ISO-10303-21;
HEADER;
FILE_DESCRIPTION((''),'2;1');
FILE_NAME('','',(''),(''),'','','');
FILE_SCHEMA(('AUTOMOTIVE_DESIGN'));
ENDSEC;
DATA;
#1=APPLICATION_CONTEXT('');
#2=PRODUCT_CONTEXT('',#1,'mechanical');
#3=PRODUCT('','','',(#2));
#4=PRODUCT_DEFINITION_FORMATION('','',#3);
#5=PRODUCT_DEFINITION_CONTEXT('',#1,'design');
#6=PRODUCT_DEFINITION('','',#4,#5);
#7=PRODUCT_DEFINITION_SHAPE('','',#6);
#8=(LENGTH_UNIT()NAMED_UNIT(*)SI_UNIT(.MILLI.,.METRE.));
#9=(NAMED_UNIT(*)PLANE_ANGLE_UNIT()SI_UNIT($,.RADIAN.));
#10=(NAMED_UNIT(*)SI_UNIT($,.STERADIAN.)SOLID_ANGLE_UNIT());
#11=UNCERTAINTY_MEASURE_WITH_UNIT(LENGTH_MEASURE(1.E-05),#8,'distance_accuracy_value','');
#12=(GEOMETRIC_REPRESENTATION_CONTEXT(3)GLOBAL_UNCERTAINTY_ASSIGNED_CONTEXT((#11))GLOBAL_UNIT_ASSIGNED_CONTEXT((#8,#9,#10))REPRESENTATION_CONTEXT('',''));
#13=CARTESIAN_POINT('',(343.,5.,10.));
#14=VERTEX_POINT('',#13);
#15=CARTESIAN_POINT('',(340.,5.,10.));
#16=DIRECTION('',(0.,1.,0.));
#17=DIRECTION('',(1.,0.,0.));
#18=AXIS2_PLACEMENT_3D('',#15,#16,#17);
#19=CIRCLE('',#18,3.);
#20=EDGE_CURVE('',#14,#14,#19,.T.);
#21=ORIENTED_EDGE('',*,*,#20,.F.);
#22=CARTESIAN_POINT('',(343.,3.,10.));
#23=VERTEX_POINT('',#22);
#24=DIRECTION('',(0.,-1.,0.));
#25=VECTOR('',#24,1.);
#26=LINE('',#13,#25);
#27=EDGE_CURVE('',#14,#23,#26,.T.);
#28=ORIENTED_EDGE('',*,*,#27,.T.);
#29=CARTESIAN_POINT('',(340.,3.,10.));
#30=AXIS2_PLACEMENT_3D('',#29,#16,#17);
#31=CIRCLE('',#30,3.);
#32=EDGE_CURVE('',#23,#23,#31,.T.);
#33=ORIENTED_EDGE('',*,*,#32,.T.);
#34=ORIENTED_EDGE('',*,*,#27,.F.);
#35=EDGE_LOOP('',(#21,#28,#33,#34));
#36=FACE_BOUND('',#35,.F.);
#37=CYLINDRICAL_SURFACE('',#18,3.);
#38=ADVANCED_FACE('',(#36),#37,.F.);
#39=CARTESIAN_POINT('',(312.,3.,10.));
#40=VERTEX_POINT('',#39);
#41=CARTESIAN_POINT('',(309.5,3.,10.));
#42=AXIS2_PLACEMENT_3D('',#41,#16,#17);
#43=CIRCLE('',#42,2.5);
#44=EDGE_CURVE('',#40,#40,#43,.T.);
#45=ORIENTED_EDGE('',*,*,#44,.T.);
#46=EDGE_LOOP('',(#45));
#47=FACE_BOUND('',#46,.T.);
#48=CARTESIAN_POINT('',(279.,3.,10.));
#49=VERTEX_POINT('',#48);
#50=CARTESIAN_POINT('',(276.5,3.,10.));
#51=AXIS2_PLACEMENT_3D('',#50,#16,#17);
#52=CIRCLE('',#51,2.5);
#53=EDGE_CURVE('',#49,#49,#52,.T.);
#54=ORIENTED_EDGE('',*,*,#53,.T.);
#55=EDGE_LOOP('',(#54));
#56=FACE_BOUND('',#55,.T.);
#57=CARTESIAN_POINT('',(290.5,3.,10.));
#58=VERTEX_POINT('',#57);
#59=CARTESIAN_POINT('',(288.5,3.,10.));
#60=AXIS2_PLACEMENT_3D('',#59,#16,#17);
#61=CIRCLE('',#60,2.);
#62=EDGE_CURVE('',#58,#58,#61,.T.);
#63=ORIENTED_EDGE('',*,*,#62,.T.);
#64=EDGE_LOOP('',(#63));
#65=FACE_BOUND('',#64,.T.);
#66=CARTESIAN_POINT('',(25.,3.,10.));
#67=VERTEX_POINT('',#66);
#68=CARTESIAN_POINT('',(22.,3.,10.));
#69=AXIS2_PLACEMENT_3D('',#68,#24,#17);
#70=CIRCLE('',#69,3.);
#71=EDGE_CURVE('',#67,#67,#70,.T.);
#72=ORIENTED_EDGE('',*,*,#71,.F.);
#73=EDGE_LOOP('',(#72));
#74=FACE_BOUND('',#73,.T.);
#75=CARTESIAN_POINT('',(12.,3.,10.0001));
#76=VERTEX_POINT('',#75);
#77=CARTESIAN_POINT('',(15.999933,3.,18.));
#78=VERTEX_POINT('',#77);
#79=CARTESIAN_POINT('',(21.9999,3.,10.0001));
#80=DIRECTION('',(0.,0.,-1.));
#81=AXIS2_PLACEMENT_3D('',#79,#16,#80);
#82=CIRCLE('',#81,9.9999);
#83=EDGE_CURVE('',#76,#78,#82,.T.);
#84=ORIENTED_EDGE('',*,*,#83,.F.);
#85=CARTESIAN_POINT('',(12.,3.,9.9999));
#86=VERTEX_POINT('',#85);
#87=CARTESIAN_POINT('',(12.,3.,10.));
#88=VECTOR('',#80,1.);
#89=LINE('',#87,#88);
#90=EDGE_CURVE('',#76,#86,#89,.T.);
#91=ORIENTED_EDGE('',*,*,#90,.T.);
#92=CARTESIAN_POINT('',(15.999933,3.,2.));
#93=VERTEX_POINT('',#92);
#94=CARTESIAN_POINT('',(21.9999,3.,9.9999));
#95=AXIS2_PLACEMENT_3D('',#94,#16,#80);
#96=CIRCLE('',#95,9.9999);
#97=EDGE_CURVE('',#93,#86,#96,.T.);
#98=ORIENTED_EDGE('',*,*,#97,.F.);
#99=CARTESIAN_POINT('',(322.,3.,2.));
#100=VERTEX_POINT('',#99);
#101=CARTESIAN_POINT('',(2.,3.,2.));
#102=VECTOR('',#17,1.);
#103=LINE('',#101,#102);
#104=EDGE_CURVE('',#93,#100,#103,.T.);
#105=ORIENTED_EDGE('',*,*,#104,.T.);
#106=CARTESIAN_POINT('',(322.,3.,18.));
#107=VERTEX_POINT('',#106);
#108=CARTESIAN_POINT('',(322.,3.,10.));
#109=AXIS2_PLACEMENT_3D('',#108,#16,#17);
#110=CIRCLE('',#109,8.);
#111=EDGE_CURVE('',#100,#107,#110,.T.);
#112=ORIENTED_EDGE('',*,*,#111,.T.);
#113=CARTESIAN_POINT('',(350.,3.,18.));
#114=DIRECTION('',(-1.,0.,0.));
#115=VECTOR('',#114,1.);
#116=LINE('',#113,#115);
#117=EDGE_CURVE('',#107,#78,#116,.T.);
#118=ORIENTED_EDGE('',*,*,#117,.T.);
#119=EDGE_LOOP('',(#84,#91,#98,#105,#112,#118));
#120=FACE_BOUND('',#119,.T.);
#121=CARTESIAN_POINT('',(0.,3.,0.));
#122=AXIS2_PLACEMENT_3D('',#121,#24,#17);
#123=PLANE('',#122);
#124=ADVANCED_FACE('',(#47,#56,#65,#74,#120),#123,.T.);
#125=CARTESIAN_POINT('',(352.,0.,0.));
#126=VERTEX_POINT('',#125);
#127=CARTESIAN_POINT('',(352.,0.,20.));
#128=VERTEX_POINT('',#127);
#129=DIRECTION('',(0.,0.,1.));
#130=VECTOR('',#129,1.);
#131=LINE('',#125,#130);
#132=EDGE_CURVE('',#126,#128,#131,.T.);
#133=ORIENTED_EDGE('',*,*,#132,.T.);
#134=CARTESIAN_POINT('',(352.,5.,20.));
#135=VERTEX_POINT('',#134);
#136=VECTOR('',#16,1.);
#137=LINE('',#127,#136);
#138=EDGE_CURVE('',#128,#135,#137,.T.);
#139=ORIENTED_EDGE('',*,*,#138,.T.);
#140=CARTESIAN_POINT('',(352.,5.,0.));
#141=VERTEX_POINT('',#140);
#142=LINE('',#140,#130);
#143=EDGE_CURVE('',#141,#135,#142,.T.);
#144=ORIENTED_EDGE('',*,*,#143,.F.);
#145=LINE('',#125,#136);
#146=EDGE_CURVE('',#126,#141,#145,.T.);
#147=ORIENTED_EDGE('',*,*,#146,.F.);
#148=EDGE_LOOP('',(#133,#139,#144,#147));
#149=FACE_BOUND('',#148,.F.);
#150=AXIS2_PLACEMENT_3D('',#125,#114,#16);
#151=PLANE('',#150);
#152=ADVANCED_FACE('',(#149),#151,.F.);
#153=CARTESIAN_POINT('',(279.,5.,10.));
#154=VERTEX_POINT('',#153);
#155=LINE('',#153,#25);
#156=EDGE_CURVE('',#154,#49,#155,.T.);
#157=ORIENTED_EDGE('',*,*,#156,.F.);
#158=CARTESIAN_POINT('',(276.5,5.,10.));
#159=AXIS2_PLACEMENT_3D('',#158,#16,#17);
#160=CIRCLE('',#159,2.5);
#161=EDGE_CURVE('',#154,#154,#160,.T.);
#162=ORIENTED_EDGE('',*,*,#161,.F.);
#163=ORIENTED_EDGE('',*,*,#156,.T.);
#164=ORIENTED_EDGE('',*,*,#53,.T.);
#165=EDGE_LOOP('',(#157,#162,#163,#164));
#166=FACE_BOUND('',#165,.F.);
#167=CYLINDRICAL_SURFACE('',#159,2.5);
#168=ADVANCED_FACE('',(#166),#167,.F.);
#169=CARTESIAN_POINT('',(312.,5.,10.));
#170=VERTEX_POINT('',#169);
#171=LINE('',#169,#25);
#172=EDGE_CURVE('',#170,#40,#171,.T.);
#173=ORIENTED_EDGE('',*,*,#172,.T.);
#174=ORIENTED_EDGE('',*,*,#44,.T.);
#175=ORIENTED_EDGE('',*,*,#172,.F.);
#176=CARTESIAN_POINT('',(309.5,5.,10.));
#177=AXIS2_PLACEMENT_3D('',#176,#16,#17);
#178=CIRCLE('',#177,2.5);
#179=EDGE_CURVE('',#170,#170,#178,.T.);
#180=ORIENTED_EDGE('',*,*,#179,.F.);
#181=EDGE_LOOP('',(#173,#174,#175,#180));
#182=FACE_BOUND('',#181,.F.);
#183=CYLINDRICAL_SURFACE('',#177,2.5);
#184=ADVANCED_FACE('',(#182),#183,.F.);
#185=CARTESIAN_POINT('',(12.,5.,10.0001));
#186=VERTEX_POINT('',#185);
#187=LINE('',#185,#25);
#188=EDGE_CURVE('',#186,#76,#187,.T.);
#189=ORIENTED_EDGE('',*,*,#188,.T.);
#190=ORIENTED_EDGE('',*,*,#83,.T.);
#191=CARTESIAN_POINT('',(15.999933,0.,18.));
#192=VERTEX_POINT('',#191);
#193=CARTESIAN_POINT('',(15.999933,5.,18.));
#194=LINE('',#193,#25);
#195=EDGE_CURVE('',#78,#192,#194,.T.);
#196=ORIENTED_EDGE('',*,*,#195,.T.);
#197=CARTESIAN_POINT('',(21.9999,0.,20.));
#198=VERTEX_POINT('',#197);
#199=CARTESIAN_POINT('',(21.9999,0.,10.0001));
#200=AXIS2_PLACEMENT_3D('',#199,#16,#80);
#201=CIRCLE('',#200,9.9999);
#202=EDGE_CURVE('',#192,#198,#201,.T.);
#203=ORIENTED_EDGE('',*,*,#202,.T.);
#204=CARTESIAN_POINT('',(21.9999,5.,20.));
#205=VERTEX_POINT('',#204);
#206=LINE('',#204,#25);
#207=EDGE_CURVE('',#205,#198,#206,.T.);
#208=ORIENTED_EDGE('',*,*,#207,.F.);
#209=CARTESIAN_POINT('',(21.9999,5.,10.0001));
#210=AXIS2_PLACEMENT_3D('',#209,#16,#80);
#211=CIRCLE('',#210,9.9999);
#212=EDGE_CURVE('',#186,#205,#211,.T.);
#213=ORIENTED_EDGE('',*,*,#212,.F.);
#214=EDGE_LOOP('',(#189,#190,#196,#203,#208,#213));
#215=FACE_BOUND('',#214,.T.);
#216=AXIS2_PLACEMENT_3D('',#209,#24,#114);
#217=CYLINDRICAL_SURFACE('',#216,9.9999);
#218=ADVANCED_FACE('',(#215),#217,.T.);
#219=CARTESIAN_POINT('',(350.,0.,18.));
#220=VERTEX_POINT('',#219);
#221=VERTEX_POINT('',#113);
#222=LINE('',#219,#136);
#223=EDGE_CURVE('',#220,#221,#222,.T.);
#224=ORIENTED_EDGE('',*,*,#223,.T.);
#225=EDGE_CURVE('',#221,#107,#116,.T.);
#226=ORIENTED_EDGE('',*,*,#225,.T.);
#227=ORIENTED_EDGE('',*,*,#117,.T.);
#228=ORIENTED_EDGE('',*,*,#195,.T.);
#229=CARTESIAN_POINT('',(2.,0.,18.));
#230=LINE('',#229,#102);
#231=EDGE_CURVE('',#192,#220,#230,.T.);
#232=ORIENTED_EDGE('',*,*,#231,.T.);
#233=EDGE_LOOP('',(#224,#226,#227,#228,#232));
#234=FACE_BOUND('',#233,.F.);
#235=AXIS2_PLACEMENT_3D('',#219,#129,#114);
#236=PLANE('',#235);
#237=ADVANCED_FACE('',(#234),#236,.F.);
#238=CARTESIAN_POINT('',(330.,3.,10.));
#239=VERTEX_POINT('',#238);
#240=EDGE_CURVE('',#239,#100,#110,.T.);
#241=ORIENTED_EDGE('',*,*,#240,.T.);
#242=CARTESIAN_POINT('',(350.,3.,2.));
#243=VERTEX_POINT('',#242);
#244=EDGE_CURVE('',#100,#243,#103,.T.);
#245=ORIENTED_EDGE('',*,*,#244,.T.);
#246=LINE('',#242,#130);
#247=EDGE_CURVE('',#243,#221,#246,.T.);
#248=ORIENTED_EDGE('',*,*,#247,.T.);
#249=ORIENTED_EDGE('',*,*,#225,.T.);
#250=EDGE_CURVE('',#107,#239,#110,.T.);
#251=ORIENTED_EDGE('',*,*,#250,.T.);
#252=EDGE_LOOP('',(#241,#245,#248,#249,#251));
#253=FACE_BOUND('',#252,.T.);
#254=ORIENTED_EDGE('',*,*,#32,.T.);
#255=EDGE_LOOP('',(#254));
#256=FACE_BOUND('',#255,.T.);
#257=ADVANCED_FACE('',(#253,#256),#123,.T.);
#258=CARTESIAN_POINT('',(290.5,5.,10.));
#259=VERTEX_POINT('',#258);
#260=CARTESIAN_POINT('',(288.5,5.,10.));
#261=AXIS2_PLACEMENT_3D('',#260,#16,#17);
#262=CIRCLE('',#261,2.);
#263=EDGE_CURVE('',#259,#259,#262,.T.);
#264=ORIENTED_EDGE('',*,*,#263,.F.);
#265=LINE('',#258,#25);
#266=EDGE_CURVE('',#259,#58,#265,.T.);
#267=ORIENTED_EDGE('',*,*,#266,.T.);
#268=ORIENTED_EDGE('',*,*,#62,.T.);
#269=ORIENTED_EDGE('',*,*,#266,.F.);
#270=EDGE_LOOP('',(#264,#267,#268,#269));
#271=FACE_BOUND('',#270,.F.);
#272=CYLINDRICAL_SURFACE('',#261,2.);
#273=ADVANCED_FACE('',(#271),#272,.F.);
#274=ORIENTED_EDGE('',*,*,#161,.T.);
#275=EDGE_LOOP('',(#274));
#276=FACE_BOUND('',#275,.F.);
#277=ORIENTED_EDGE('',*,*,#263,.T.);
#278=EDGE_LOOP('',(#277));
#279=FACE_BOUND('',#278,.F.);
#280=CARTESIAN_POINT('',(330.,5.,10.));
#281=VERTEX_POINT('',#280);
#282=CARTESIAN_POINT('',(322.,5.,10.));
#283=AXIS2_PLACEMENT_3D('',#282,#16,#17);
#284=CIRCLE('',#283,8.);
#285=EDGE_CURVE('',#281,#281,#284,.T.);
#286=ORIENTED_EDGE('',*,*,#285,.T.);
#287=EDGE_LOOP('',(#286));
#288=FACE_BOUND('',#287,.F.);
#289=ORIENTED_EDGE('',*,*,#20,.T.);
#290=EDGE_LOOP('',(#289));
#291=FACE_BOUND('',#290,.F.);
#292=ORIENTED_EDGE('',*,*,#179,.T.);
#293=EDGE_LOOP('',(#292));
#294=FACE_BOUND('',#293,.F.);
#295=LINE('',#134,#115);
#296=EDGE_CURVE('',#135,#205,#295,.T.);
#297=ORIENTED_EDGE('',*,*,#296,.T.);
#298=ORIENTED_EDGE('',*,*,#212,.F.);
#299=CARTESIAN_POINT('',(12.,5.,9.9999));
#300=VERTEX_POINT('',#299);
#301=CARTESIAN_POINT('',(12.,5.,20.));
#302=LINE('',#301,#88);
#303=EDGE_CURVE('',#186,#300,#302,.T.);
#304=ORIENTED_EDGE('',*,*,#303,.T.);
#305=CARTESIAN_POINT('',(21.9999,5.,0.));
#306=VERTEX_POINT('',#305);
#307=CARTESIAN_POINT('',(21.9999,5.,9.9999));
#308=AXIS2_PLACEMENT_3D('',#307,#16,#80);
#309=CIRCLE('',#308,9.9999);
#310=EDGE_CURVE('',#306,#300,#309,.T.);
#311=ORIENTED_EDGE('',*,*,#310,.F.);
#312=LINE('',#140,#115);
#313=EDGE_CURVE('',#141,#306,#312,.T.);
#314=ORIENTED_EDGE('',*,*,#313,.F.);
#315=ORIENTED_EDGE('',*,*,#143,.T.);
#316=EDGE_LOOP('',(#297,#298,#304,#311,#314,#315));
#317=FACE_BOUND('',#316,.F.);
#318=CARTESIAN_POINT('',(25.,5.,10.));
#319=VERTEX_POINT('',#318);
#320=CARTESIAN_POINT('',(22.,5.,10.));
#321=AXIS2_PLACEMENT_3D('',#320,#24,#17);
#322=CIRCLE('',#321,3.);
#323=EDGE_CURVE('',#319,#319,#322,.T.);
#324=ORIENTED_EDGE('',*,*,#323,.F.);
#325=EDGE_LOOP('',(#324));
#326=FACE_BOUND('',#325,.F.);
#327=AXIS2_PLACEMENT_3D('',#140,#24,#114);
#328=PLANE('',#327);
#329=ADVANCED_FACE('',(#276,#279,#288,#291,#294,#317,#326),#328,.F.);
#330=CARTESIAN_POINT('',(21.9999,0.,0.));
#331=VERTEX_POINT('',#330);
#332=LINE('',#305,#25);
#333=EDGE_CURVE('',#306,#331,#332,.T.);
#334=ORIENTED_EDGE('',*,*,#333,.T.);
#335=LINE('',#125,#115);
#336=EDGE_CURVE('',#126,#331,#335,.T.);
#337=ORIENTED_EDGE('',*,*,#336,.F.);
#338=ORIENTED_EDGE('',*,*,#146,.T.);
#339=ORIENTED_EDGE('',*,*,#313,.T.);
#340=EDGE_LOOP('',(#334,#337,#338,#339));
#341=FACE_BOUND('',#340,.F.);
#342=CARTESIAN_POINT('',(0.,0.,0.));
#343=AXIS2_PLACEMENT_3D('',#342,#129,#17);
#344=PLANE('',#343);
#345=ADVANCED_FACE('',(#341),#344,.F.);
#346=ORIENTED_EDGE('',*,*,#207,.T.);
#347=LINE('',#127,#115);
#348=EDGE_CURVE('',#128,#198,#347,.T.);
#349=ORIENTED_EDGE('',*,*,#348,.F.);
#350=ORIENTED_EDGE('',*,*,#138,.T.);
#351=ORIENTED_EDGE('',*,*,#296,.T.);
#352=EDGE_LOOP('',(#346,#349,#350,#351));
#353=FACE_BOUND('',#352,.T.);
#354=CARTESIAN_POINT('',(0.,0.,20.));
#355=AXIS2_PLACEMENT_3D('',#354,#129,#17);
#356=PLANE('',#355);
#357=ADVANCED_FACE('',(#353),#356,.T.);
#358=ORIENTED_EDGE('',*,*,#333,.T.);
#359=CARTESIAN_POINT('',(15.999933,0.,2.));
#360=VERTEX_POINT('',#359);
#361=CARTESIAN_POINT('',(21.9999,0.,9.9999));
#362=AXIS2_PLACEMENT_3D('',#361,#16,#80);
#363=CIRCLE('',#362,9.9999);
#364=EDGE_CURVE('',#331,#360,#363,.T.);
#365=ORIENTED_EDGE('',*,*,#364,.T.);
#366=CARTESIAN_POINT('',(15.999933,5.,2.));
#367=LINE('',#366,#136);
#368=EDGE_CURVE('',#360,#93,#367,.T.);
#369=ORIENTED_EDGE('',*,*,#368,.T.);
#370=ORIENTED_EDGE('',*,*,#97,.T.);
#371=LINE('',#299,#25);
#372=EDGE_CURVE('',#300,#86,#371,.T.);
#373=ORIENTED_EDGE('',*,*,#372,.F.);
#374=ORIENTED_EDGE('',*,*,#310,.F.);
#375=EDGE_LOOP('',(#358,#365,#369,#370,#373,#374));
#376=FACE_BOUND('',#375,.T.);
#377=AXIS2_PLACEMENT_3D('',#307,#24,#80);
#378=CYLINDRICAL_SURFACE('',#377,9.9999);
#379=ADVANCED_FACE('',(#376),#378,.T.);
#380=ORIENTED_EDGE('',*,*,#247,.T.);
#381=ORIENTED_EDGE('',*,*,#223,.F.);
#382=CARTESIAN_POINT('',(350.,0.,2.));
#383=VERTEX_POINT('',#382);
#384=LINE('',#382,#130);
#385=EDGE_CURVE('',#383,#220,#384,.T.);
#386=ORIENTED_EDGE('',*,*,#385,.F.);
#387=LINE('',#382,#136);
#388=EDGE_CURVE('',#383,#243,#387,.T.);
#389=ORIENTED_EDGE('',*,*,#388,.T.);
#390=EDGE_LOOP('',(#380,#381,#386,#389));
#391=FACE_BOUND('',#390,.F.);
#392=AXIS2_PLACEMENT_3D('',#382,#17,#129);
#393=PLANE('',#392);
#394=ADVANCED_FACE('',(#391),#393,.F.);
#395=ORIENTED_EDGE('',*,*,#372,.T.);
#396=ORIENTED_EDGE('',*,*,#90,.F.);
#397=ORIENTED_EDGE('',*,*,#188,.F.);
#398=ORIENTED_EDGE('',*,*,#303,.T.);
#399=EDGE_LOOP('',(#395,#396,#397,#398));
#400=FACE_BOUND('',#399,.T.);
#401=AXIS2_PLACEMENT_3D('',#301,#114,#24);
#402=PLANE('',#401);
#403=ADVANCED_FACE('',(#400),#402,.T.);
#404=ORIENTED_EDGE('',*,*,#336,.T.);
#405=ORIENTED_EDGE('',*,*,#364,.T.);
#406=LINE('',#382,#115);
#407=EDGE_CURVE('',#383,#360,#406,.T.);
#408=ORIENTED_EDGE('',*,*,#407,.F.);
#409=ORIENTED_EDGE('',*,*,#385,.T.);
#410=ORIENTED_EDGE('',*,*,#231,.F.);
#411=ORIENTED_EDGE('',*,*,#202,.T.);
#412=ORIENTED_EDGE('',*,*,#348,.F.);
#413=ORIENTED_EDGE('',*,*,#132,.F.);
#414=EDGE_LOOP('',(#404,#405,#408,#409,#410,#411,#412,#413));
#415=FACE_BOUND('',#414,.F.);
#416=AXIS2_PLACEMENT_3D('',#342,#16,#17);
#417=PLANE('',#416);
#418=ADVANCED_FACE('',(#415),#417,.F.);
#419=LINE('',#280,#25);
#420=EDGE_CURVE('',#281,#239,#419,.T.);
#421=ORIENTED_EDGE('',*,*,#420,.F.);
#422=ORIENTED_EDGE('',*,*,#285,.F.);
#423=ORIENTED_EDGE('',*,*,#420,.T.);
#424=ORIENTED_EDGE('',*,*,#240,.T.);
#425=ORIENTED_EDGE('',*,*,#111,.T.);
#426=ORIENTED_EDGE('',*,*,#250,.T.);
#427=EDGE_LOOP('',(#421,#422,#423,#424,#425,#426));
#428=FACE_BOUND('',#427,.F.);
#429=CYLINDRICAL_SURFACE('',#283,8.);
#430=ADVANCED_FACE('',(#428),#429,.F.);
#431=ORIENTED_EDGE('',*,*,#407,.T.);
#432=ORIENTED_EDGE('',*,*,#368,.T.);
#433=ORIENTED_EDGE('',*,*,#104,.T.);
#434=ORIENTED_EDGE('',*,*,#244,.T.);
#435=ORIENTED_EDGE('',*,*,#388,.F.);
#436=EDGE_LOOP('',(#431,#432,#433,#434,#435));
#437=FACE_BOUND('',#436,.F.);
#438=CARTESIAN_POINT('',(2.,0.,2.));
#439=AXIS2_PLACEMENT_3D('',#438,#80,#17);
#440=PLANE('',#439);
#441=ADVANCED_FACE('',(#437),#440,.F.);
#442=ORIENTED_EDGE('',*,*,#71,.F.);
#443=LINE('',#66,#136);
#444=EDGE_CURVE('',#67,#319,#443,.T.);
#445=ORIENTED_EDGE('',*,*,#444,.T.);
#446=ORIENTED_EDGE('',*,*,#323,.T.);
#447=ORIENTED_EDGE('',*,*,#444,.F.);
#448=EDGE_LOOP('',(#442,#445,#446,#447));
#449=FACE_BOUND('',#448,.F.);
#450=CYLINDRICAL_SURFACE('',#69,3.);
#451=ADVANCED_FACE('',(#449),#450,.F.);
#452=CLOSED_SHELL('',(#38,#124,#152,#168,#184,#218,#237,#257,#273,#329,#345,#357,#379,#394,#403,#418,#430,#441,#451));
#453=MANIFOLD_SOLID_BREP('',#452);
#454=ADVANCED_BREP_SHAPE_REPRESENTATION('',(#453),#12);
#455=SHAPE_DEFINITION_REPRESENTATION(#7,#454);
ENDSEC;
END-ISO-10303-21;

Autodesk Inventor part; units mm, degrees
ref_plane "YZ Plane" through (0, 0, 0) normal (1, 0, 0) x (0, 1, 0)
ref_plane "XZ Plane" through (0, 0, 0) normal (0, 1, 0) x (-1, 0, 0)
ref_plane "XY Plane" through (0, 0, 0) normal (0, 0, 1) x (1, 0, 0)
sketch "スケッチ1" plane through (0, 0, 0) normal (0, 0, 1) x (1, 0, 0)
  line L0 (0, 0) -> (352, 0)
  line L1 (352, 0) -> (352, 5)
  line L2 (352, 5) -> (0, 5)
  line L3 (0, 5) -> (0, 0)
  line L4 (0, 0) -> (6, 0)
  line L5 (0, 1) -> (0, 0)
  dimension "d0" = 352
  dimension "d1" = 5
extrude "押し出し1" add sketch "スケッチ1" along normal blind 20
sketch "スケッチ3" plane through (0, 0, 0) normal (-1, 0, 0) x (0, 0, 1)
  line L0 (0, 5) -> (0, 0) projected
  line L1 (0, 0) -> (20, 0) projected
  line L2 (20, 5) -> (20, 0) projected
  line L3 (0, 5) -> (20, 5) projected
  circle A0 centre (4, 2) radius 1.2
  circle A1 centre (16, 3) radius 1.2
  dimension "d14" = 2.4
  dimension "d15" = 2.4
  dimension "d16" = 3
  dimension "d17" = 4
  dimension "d18" = 4
  dimension "d19" = 3
extrude "押し出し3" cut sketch "スケッチ3" against normal blind 6 contours A0 | A1
sketch "スケッチ4" plane through (0, 0, 0) normal (0, -1, 0) x (1, 0, 0)
  line L0 (0, 0) -> (352, 0) projected
  line L1 (352, 0) -> (352, 20) projected
  line L2 (0, 20) -> (352, 20) projected
  line L3 (0, 0) -> (0, 20) projected
  line L4 (2, 2) -> (350, 2)
  line L5 (350, 2) -> (350, 18)
  line L6 (350, 18) -> (2, 18)
  line L7 (2, 18) -> (2, 2)
  dimension "d22" = 2
  dimension "d23" = 2
  dimension "d24" = 2
  dimension "d25" = 2
extrude "押し出し4" cut sketch "スケッチ4" against normal blind 3 contours L7 L6 L5 L4
sketch "スケッチ5" plane through (0, 5, 0) normal (0, 1, 0) x (1, 0, 0)
  circle A0 centre (322, -10) radius 8 projected
extrude "押し出し5" cut sketch "スケッチ5" against normal through all
sketch "スケッチ6" plane through (0, 5, 0) normal (0, 1, 0) x (1, 0, 0)
  circle A0 centre (340, -10) radius 3 projected
extrude "押し出し6" cut sketch "スケッチ6" against normal through all
sketch "スケッチ7" plane through (0, 5, 0) normal (0, 1, 0) x (1, 0, 0)
  circle A0 centre (309.5, -10) radius 2.5 projected
  circle A1 centre (288.5, -10) radius 2 projected
  circle A2 centre (276.5, -10) radius 2.5 projected
extrude "押し出し7" cut sketch "スケッチ7" against normal through all
sketch "スケッチ8" plane through (0, 0, 20) normal (0, 0, 1) x (1, 0, 0)
  line L0 (352, 5) -> (0, 5) projected
  line L1 (0, 5) -> (0, 0) projected
  line L2 (0, 0) -> (352, 0) projected
  line L3 (350, 0) -> (2, 0) projected
  line L4 (0, 5) -> (12, 5)
  line L5 (12, 5) -> (12, 0)
  line L6 (12, 0) -> (0, 0)
  line L7 (0, 0) -> (0, 5)
  dimension "d34" = 12
extrude "押し出し8" cut sketch "スケッチ8" against normal through all
sketch "スケッチ9" plane through (0, 3, 0) normal (0, -1, 0) x (1, 0, 0)
  line L0 (12, 0) -> (12, 20) projected
  line L1 (12, 10) -> (22, 10)
  circle A0 centre (22, 10) radius 3
  point P0 (0, 0)
  dimension "d37" = 10
  dimension "d38" = 6
extrude "押し出し9" cut sketch "スケッチ9" against normal through all
fillet "フィレット1" radius 10 2 edges at (12, 2.5, 20) (12, 2.5, 0)
properties part number "arm1_L"
